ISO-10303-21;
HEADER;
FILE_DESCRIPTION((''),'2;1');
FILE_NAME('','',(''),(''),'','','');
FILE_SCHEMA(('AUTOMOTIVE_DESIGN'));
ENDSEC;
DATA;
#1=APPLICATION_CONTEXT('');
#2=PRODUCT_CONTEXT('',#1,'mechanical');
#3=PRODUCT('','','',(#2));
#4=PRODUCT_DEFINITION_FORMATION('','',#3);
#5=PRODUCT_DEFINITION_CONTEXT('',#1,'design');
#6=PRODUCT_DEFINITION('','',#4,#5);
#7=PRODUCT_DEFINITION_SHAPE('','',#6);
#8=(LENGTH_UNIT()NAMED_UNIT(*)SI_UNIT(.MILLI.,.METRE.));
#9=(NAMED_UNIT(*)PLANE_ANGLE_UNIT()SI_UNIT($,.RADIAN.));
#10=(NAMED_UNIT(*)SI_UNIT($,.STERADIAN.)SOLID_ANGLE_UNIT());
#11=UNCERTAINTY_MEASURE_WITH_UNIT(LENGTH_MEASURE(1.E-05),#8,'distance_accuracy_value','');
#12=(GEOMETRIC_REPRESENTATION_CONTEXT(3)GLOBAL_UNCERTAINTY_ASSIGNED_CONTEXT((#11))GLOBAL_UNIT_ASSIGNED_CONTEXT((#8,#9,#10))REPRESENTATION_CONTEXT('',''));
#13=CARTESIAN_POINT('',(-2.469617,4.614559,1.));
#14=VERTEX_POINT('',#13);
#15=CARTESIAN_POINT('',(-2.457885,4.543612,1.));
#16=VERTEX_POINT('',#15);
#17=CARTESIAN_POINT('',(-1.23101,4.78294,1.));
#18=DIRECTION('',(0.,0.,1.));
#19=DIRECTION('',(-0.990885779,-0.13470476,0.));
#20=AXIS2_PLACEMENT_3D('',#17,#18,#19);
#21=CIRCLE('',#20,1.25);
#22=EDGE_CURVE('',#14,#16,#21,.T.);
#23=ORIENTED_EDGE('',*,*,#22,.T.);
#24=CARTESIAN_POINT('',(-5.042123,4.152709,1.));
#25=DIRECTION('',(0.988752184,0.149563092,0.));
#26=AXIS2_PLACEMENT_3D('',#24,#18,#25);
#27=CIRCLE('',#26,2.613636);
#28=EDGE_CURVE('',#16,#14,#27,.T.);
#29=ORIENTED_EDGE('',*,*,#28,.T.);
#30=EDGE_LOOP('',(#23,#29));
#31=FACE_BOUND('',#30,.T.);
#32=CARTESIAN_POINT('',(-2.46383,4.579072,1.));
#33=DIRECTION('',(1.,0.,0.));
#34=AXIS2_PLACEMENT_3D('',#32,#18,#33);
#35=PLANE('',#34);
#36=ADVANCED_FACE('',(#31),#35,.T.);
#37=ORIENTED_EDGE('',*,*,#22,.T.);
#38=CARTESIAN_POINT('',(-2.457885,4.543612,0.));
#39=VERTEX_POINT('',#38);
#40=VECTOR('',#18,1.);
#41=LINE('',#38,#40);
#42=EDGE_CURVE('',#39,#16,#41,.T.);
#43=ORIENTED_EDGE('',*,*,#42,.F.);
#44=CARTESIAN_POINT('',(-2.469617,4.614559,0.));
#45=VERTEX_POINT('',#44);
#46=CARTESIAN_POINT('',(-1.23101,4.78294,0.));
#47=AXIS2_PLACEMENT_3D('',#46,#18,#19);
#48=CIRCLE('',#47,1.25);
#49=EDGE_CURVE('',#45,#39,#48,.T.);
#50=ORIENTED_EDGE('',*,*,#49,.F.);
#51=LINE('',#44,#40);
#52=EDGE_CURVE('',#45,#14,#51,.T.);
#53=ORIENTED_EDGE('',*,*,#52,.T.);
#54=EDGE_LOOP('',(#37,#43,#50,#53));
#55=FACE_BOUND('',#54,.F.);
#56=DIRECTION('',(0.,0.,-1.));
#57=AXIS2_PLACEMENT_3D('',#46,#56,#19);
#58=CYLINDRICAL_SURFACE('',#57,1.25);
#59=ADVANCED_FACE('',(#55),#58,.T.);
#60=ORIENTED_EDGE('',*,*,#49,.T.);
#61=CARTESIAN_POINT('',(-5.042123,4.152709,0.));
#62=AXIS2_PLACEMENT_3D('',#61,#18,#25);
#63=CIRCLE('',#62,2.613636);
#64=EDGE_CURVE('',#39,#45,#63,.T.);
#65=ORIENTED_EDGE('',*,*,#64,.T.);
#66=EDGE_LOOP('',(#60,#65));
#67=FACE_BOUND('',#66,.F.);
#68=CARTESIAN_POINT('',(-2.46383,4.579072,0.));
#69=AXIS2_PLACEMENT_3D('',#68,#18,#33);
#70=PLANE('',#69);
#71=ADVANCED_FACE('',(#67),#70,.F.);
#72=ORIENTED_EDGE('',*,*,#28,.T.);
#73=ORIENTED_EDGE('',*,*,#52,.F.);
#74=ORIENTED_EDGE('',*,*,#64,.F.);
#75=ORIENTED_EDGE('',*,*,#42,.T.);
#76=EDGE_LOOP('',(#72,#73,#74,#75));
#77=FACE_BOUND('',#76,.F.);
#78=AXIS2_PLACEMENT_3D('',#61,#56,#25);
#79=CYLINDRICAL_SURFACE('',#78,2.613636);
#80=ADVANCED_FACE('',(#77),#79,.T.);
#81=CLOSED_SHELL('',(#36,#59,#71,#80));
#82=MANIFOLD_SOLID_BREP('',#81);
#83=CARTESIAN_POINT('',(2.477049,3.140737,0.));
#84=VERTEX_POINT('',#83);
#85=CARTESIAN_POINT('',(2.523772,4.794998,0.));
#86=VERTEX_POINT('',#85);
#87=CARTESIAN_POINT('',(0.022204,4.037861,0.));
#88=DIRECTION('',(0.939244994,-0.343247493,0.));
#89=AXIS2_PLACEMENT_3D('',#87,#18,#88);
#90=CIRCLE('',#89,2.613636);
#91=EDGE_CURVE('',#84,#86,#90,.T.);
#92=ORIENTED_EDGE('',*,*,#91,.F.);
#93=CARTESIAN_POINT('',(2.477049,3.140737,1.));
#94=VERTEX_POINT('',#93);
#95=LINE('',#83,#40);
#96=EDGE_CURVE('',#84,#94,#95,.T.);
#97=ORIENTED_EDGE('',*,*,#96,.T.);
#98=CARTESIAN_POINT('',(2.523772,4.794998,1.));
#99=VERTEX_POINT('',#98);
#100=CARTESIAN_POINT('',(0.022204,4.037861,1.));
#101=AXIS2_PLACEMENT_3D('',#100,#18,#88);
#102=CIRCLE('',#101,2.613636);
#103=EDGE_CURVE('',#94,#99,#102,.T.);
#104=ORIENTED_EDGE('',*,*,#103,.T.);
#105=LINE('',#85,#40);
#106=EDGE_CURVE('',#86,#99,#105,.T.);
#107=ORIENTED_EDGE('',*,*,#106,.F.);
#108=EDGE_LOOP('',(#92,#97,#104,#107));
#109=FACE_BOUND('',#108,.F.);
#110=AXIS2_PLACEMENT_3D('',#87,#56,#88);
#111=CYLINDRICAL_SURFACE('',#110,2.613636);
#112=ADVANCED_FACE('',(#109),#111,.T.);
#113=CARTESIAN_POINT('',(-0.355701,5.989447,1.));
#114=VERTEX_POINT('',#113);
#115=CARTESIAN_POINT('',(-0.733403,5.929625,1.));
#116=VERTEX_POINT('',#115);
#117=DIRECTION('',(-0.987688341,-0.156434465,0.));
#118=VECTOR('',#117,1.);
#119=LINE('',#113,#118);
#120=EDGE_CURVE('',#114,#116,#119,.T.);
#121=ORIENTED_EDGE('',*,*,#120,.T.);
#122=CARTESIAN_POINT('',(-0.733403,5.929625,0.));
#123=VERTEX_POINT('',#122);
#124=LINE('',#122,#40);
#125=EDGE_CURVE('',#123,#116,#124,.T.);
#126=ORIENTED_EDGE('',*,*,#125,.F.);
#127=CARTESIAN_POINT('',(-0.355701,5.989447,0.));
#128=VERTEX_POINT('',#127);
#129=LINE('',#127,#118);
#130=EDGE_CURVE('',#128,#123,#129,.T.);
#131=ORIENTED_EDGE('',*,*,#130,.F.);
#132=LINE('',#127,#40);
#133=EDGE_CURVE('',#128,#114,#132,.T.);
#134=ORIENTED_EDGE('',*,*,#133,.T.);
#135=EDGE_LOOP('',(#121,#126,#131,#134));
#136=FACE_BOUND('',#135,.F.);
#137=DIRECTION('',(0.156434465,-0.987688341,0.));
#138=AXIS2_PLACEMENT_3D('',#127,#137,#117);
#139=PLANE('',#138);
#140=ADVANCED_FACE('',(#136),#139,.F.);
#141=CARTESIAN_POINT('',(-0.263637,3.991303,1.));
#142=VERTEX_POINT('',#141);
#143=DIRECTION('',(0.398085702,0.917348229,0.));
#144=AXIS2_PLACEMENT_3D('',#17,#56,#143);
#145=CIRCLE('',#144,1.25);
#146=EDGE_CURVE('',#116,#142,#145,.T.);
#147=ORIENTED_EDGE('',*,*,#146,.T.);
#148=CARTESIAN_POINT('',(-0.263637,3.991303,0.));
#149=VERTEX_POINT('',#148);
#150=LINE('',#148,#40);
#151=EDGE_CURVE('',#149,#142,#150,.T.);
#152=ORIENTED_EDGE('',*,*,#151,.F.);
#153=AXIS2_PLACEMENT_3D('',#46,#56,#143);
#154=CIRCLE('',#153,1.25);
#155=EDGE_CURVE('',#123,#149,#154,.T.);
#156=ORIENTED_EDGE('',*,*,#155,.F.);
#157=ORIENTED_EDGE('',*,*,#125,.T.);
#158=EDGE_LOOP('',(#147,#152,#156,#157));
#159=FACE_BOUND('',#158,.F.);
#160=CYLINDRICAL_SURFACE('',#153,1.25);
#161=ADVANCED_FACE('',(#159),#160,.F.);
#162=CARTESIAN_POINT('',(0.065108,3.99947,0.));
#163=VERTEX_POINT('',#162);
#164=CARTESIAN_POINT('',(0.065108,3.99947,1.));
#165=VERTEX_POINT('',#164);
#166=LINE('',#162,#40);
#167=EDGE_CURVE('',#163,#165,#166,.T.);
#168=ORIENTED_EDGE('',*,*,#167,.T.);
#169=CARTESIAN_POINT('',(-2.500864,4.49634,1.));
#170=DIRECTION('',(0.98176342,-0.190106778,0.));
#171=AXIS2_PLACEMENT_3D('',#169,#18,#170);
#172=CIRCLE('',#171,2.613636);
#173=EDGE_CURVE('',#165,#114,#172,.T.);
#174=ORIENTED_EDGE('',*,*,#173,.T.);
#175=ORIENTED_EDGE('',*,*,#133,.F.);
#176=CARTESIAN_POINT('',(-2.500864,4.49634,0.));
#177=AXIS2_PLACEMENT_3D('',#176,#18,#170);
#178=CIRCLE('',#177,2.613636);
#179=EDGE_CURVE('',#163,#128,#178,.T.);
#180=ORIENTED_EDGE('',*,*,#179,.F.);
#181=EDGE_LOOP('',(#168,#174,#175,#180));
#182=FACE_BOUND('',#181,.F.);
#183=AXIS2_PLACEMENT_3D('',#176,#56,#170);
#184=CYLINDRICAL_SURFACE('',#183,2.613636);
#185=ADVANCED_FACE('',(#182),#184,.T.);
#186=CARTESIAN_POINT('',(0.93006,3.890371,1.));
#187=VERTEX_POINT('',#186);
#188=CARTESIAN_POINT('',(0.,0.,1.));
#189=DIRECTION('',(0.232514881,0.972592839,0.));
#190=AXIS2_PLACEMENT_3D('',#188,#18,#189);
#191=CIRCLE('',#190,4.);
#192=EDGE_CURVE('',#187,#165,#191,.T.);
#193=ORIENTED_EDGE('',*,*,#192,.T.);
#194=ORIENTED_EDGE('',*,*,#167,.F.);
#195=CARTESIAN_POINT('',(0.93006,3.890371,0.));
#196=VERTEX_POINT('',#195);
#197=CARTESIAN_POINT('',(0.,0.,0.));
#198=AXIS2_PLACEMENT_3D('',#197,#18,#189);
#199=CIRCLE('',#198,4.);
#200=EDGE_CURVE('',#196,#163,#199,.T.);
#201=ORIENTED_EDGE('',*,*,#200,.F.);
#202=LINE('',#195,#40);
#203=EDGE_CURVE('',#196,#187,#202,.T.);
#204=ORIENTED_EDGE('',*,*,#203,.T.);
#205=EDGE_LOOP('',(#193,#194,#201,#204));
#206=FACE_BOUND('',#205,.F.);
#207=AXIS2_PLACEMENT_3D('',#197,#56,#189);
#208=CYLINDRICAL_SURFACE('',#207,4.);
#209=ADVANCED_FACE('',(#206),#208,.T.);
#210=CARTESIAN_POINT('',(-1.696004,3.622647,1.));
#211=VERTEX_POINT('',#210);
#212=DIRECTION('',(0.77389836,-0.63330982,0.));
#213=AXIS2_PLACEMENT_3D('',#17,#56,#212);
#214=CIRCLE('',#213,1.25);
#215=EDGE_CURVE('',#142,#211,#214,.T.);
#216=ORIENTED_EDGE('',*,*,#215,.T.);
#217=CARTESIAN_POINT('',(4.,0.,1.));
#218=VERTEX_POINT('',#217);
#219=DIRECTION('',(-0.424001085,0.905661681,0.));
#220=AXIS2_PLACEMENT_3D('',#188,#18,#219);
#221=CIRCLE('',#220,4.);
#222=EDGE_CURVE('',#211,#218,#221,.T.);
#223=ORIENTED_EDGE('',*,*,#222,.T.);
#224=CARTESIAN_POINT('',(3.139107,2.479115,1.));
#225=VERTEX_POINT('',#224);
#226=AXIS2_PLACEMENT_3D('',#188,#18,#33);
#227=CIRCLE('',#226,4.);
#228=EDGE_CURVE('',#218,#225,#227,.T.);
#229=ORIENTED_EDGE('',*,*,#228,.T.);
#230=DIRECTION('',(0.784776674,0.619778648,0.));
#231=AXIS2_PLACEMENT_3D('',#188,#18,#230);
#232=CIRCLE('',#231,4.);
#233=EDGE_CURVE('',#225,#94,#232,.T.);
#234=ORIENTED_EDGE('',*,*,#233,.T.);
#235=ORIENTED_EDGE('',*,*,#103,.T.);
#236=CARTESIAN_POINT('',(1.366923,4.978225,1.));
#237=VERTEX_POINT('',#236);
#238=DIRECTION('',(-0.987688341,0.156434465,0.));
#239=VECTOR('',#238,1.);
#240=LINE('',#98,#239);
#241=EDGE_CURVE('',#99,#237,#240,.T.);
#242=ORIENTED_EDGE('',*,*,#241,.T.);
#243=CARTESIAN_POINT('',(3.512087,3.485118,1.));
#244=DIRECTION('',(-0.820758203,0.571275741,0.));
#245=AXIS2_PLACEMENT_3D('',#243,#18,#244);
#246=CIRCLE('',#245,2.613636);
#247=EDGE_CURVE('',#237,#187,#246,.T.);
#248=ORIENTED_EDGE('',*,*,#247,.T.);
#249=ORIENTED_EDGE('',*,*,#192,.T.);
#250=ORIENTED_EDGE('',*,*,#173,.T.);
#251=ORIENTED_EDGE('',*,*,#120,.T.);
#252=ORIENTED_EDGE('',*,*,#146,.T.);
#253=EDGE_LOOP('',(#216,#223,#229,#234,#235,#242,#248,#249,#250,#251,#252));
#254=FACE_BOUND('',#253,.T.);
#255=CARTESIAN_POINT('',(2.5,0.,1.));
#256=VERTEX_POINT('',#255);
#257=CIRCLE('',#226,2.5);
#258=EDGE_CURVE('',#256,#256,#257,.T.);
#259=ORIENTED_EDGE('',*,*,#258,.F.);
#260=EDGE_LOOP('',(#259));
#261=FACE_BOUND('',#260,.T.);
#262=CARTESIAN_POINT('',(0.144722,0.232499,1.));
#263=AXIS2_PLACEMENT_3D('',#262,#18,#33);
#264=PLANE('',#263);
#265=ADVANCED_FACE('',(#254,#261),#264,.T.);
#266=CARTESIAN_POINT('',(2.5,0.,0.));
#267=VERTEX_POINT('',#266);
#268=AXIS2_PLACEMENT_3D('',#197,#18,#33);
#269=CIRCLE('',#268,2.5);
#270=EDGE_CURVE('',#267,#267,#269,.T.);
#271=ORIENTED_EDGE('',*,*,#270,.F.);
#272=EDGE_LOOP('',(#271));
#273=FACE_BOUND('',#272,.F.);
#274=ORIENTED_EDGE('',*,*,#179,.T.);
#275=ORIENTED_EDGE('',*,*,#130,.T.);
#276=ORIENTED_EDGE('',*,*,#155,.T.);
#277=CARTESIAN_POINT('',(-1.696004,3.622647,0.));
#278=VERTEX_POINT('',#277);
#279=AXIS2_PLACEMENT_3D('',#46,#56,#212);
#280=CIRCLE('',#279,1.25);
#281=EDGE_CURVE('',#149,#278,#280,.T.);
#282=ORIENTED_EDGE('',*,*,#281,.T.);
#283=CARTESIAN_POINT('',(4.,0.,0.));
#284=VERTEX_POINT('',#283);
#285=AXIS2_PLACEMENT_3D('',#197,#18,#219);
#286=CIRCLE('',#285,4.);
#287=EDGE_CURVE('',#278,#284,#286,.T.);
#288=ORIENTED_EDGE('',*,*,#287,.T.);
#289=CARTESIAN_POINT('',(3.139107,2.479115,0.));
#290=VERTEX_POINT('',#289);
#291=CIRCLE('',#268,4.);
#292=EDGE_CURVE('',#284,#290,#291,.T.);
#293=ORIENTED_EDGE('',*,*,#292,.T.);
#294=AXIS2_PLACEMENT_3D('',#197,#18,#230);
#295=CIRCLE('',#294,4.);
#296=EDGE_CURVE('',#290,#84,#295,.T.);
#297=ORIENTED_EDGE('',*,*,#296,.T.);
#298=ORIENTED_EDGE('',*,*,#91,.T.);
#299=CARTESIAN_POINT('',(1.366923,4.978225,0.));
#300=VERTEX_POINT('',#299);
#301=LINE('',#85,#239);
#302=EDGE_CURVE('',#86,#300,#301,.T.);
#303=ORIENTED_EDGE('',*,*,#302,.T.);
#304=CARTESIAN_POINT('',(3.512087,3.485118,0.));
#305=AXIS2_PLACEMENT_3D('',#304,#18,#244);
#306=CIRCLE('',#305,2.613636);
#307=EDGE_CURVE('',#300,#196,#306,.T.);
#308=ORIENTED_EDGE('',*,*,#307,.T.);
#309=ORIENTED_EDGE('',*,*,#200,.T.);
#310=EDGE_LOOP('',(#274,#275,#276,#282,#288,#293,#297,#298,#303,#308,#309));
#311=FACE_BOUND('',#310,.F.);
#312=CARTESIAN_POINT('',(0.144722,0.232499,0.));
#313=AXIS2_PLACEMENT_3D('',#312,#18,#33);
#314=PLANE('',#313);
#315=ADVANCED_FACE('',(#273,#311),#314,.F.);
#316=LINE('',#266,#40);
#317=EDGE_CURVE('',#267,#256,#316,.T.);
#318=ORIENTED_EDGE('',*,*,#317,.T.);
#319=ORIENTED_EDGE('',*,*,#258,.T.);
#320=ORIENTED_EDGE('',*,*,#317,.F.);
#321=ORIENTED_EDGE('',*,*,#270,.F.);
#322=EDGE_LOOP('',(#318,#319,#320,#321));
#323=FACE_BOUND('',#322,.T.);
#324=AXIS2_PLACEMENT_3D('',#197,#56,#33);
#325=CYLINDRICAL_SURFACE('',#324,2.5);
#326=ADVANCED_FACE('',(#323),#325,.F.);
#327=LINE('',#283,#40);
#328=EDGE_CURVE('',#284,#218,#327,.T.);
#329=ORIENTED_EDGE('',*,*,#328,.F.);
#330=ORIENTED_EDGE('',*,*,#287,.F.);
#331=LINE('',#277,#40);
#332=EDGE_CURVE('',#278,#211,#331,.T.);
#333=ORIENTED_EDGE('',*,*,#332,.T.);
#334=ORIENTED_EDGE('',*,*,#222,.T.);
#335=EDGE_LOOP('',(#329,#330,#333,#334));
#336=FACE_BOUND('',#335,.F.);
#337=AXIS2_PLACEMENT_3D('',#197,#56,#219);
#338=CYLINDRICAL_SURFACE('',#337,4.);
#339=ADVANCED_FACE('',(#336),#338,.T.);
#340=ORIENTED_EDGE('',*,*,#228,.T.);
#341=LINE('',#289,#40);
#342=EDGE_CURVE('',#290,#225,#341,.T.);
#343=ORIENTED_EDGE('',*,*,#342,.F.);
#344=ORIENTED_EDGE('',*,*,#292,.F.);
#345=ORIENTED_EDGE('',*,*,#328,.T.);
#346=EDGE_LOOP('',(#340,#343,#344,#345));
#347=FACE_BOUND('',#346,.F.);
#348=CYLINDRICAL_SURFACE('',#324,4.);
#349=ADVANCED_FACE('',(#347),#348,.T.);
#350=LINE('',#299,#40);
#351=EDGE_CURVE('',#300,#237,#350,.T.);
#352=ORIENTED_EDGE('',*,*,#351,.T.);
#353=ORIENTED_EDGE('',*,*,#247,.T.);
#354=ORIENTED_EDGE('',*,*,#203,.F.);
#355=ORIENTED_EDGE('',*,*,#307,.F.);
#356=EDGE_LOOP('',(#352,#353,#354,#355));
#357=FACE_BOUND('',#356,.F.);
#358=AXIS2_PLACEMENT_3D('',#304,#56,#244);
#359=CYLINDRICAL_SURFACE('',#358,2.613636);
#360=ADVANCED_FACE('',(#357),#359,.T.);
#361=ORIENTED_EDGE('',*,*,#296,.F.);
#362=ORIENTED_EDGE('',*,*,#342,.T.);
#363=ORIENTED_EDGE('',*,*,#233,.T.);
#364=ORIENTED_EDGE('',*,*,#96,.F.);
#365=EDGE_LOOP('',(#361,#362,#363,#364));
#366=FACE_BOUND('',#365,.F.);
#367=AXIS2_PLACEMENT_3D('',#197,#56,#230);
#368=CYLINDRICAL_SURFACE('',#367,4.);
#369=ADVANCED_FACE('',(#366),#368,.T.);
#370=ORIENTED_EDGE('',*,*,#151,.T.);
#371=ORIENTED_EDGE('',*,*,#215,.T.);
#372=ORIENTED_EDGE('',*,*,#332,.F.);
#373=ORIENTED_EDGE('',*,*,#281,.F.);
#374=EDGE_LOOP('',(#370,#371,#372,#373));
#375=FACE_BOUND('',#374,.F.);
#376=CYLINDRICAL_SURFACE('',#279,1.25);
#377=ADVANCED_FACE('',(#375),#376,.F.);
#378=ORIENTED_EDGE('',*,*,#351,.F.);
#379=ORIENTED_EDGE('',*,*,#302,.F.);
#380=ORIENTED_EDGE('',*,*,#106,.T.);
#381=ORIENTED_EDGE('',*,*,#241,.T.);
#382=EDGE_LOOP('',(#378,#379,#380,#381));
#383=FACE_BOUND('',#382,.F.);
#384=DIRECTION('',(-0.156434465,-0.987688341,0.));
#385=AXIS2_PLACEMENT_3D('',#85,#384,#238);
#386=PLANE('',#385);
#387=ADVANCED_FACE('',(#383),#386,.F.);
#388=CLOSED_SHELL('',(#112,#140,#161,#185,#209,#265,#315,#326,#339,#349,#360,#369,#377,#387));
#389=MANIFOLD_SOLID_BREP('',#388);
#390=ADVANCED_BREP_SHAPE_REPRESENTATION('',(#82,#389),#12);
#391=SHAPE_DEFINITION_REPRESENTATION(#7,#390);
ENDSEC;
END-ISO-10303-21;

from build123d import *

# Parameters (mm, degrees)
F2_R     = 2.5
F3_DEPTH = 1


# Not quite as in the source:
# - a feature of the source that left no trace in its solid (it failed there, or was rolled back) is left out


with BuildPart() as f3:
    # F2 (on Top) → F3 (new body)
    with BuildSketch(Plane.XY):
        with BuildLine():
            ThreePointArc((-1.6960043415, 3.6226467222), (-2.1466232359, -3.3752049839), (4, 0))
            ThreePointArc((4, 0), (3.7786523245, 1.3121686669), (3.1391066948, 2.4791145917))
            ThreePointArc((3.1391066948, 2.4791145917), (2.8274967449, 2.8293571986), (2.4770492462, 3.1407367021))
            ThreePointArc((2.4770492462, 3.1407367021), (1.7443008848, 3.5996408742), (0.9300595273, 3.8903713545))
            ThreePointArc((0.9300595273, 3.8903713545), (0.5005649816, 3.9685557447), (0.0651081325, 3.9994700813))
            ThreePointArc((0.0651081325, 3.9994700813), (-0.0993482735, 3.9987660497), (-0.2636367411, 3.9913025028))
            ThreePointArc((-0.2636367411, 3.9913025028), (-0.9194446737, 3.572391456), (-1.6960043415, 3.6226467222))
        make_face()
        Circle(F2_R, mode=Mode.SUBTRACT)
        with BuildLine():
            ThreePointArc((0.9300595273, 3.8903713545), (1.7443008848, 3.5996408742), (2.4770492462, 3.1407367021))
            ThreePointArc((2.4770492462, 3.1407367021), (2.6347989126, 3.9640717606), (2.5237715391, 4.7949980498))
            Line((2.5237715391, 4.7949980498), (1.3669232641, 4.9782248164))
            ThreePointArc((1.3669232641, 4.9782248164), (1.0867126989, 4.4591073757), (0.9300595273, 3.8903713545))
        make_face()
        with BuildLine():
            ThreePointArc((-0.733402564, 5.9296250647), (-0.0161783263, 5.0773625262), (-0.2636367411, 3.9913025028))
            ThreePointArc((-0.2636367411, 3.9913025028), (-0.0993482735, 3.9987660497), (0.0651081325, 3.9994700813))
            ThreePointArc((0.0651081325, 3.9994700813), (0.0562243119, 5.0370730396), (-0.3557009583, 5.9894471221))
            Line((-0.3557009583, 5.9894471221), (-0.733402564, 5.9296250647))
        make_face()
    extrude(amount=F3_DEPTH)


with BuildPart() as f3b:
    # F2 (on Top) → F3, piece 2 (new body)
    with BuildSketch(Plane.XY):
        with BuildLine():
            ThreePointArc((-2.4696169155, 4.6145588285), (-2.4642610911, 4.5790010988), (-2.4578846973, 4.5436121372))
            ThreePointArc((-2.4578846973, 4.5436121372), (-2.4635067961, 4.579125834), (-2.4696169155, 4.6145588285))
        make_face()
    extrude(amount=F3_DEPTH)


solid = Compound([f3.part, f3b.part])
